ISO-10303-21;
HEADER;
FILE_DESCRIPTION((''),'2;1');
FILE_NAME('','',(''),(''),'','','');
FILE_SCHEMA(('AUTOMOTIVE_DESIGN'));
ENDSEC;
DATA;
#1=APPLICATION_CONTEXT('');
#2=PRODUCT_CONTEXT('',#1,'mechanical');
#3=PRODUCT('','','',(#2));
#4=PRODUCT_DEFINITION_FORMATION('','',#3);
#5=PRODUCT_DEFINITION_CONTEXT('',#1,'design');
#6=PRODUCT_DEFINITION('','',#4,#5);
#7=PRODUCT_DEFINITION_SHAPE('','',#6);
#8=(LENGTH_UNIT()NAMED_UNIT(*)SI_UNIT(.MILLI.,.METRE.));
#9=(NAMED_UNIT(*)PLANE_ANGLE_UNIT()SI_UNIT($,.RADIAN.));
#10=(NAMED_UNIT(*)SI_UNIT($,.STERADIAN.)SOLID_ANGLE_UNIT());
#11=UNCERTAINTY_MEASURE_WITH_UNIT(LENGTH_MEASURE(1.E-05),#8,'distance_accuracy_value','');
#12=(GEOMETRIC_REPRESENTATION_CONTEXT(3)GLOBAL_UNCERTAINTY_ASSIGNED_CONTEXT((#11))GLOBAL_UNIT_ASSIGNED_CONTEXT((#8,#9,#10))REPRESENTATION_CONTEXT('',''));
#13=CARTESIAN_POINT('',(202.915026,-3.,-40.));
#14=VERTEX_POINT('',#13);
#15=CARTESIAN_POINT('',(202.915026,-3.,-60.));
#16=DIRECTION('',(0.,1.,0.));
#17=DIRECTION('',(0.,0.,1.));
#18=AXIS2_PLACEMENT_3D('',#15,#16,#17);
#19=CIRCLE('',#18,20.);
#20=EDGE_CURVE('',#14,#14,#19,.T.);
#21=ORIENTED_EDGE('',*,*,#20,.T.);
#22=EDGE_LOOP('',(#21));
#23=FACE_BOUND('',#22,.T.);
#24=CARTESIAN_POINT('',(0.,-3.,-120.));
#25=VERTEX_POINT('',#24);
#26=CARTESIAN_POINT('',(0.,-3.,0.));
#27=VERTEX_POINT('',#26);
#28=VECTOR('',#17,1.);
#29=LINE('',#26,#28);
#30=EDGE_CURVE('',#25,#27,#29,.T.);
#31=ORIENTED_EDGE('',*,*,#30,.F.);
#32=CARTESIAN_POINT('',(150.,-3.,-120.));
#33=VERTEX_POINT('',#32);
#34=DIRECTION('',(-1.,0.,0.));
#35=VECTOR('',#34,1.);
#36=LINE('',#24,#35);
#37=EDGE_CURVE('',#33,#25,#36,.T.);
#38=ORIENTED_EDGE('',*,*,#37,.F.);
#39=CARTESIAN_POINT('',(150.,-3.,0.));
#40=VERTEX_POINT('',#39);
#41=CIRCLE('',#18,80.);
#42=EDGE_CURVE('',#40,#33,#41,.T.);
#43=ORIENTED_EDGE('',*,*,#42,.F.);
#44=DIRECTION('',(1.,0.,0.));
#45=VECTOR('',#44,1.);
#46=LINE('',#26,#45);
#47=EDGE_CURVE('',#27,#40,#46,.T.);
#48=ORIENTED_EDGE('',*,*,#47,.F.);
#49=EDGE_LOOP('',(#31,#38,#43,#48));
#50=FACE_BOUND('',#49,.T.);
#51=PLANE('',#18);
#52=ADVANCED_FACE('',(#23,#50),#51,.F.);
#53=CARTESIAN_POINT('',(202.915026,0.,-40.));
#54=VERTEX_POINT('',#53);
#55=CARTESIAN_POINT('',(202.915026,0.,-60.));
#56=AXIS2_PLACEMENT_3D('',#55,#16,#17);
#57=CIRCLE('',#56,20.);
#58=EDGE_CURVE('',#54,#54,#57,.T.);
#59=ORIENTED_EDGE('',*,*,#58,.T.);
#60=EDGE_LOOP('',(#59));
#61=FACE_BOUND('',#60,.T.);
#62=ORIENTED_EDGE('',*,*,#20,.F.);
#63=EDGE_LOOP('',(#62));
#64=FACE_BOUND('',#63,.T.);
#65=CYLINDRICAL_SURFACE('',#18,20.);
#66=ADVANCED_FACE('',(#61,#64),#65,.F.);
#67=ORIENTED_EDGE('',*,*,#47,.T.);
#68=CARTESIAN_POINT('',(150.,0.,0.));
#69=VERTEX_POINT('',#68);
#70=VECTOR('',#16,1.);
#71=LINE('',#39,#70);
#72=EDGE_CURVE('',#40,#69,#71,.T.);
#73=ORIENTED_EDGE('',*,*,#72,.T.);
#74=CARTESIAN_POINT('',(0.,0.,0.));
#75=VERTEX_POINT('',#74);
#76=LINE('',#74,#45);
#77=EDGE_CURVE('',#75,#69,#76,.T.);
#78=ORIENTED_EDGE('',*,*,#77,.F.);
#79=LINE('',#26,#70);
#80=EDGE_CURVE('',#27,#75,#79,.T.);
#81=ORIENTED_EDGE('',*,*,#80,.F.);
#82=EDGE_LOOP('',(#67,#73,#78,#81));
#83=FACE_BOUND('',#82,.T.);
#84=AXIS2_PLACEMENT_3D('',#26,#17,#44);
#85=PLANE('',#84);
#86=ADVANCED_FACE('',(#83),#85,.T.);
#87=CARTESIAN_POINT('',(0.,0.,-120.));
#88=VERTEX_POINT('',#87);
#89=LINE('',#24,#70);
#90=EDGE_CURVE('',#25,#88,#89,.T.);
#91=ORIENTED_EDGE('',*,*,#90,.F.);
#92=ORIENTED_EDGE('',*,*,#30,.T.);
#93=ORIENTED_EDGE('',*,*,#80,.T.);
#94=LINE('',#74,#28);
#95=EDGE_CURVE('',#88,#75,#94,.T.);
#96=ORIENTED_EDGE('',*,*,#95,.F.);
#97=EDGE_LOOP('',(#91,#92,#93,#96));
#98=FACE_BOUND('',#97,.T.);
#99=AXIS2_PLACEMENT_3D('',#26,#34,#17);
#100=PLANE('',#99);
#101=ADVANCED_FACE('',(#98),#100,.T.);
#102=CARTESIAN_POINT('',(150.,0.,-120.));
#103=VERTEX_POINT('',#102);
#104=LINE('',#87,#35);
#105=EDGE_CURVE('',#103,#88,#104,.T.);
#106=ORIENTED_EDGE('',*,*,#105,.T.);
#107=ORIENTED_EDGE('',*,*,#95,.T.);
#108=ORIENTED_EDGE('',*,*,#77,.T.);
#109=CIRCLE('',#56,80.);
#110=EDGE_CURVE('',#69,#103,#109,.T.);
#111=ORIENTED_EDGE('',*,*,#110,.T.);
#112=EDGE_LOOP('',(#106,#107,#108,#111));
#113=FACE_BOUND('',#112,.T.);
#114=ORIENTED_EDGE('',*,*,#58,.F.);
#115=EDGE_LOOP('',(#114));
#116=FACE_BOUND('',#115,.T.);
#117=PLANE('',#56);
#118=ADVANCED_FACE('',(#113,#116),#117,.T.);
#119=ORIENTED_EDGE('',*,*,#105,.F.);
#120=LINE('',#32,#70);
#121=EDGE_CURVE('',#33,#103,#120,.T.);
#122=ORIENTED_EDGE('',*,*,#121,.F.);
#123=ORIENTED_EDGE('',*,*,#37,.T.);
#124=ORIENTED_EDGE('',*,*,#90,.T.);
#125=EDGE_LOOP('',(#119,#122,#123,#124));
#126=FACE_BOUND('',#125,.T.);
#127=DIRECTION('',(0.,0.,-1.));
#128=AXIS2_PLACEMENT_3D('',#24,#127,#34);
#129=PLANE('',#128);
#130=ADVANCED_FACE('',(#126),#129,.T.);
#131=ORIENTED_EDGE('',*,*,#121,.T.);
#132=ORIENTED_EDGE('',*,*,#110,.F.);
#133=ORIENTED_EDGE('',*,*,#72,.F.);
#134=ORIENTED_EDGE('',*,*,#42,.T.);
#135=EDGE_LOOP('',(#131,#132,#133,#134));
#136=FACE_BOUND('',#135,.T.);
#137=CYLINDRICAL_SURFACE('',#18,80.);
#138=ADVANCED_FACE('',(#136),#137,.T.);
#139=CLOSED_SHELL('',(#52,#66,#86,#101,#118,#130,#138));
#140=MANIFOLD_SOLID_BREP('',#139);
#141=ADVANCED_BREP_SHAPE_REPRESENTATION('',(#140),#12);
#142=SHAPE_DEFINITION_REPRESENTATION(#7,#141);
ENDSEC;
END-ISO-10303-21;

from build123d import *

# Parameters (mm, degrees)
SKETCH1_R          = 20
BASE_FLANGE1_DEPTH = 3


# Sheet-metal steps are written as plain solids
with BuildPart() as part:
    # Sketch1 → Base-Flange1 (new body)
    with BuildSketch(Plane(origin=(0, 0, 0), x_dir=(1, 0, 0), z_dir=(0, 1, 0))):
        with BuildLine():
            Line((0, 0), (150, 0))
            ThreePointArc((150, 0), (282.915026221, 60), (150, 120))
            Line((150, 120), (0, 120))
            Line((0, 120), (0, 0))
        make_face()
        with Locations(Location((202.915026221, 60, 0), (0, 0, 270))):
            Circle(SKETCH1_R, mode=Mode.SUBTRACT)
    extrude(amount=-BASE_FLANGE1_DEPTH)


solid = part.part
